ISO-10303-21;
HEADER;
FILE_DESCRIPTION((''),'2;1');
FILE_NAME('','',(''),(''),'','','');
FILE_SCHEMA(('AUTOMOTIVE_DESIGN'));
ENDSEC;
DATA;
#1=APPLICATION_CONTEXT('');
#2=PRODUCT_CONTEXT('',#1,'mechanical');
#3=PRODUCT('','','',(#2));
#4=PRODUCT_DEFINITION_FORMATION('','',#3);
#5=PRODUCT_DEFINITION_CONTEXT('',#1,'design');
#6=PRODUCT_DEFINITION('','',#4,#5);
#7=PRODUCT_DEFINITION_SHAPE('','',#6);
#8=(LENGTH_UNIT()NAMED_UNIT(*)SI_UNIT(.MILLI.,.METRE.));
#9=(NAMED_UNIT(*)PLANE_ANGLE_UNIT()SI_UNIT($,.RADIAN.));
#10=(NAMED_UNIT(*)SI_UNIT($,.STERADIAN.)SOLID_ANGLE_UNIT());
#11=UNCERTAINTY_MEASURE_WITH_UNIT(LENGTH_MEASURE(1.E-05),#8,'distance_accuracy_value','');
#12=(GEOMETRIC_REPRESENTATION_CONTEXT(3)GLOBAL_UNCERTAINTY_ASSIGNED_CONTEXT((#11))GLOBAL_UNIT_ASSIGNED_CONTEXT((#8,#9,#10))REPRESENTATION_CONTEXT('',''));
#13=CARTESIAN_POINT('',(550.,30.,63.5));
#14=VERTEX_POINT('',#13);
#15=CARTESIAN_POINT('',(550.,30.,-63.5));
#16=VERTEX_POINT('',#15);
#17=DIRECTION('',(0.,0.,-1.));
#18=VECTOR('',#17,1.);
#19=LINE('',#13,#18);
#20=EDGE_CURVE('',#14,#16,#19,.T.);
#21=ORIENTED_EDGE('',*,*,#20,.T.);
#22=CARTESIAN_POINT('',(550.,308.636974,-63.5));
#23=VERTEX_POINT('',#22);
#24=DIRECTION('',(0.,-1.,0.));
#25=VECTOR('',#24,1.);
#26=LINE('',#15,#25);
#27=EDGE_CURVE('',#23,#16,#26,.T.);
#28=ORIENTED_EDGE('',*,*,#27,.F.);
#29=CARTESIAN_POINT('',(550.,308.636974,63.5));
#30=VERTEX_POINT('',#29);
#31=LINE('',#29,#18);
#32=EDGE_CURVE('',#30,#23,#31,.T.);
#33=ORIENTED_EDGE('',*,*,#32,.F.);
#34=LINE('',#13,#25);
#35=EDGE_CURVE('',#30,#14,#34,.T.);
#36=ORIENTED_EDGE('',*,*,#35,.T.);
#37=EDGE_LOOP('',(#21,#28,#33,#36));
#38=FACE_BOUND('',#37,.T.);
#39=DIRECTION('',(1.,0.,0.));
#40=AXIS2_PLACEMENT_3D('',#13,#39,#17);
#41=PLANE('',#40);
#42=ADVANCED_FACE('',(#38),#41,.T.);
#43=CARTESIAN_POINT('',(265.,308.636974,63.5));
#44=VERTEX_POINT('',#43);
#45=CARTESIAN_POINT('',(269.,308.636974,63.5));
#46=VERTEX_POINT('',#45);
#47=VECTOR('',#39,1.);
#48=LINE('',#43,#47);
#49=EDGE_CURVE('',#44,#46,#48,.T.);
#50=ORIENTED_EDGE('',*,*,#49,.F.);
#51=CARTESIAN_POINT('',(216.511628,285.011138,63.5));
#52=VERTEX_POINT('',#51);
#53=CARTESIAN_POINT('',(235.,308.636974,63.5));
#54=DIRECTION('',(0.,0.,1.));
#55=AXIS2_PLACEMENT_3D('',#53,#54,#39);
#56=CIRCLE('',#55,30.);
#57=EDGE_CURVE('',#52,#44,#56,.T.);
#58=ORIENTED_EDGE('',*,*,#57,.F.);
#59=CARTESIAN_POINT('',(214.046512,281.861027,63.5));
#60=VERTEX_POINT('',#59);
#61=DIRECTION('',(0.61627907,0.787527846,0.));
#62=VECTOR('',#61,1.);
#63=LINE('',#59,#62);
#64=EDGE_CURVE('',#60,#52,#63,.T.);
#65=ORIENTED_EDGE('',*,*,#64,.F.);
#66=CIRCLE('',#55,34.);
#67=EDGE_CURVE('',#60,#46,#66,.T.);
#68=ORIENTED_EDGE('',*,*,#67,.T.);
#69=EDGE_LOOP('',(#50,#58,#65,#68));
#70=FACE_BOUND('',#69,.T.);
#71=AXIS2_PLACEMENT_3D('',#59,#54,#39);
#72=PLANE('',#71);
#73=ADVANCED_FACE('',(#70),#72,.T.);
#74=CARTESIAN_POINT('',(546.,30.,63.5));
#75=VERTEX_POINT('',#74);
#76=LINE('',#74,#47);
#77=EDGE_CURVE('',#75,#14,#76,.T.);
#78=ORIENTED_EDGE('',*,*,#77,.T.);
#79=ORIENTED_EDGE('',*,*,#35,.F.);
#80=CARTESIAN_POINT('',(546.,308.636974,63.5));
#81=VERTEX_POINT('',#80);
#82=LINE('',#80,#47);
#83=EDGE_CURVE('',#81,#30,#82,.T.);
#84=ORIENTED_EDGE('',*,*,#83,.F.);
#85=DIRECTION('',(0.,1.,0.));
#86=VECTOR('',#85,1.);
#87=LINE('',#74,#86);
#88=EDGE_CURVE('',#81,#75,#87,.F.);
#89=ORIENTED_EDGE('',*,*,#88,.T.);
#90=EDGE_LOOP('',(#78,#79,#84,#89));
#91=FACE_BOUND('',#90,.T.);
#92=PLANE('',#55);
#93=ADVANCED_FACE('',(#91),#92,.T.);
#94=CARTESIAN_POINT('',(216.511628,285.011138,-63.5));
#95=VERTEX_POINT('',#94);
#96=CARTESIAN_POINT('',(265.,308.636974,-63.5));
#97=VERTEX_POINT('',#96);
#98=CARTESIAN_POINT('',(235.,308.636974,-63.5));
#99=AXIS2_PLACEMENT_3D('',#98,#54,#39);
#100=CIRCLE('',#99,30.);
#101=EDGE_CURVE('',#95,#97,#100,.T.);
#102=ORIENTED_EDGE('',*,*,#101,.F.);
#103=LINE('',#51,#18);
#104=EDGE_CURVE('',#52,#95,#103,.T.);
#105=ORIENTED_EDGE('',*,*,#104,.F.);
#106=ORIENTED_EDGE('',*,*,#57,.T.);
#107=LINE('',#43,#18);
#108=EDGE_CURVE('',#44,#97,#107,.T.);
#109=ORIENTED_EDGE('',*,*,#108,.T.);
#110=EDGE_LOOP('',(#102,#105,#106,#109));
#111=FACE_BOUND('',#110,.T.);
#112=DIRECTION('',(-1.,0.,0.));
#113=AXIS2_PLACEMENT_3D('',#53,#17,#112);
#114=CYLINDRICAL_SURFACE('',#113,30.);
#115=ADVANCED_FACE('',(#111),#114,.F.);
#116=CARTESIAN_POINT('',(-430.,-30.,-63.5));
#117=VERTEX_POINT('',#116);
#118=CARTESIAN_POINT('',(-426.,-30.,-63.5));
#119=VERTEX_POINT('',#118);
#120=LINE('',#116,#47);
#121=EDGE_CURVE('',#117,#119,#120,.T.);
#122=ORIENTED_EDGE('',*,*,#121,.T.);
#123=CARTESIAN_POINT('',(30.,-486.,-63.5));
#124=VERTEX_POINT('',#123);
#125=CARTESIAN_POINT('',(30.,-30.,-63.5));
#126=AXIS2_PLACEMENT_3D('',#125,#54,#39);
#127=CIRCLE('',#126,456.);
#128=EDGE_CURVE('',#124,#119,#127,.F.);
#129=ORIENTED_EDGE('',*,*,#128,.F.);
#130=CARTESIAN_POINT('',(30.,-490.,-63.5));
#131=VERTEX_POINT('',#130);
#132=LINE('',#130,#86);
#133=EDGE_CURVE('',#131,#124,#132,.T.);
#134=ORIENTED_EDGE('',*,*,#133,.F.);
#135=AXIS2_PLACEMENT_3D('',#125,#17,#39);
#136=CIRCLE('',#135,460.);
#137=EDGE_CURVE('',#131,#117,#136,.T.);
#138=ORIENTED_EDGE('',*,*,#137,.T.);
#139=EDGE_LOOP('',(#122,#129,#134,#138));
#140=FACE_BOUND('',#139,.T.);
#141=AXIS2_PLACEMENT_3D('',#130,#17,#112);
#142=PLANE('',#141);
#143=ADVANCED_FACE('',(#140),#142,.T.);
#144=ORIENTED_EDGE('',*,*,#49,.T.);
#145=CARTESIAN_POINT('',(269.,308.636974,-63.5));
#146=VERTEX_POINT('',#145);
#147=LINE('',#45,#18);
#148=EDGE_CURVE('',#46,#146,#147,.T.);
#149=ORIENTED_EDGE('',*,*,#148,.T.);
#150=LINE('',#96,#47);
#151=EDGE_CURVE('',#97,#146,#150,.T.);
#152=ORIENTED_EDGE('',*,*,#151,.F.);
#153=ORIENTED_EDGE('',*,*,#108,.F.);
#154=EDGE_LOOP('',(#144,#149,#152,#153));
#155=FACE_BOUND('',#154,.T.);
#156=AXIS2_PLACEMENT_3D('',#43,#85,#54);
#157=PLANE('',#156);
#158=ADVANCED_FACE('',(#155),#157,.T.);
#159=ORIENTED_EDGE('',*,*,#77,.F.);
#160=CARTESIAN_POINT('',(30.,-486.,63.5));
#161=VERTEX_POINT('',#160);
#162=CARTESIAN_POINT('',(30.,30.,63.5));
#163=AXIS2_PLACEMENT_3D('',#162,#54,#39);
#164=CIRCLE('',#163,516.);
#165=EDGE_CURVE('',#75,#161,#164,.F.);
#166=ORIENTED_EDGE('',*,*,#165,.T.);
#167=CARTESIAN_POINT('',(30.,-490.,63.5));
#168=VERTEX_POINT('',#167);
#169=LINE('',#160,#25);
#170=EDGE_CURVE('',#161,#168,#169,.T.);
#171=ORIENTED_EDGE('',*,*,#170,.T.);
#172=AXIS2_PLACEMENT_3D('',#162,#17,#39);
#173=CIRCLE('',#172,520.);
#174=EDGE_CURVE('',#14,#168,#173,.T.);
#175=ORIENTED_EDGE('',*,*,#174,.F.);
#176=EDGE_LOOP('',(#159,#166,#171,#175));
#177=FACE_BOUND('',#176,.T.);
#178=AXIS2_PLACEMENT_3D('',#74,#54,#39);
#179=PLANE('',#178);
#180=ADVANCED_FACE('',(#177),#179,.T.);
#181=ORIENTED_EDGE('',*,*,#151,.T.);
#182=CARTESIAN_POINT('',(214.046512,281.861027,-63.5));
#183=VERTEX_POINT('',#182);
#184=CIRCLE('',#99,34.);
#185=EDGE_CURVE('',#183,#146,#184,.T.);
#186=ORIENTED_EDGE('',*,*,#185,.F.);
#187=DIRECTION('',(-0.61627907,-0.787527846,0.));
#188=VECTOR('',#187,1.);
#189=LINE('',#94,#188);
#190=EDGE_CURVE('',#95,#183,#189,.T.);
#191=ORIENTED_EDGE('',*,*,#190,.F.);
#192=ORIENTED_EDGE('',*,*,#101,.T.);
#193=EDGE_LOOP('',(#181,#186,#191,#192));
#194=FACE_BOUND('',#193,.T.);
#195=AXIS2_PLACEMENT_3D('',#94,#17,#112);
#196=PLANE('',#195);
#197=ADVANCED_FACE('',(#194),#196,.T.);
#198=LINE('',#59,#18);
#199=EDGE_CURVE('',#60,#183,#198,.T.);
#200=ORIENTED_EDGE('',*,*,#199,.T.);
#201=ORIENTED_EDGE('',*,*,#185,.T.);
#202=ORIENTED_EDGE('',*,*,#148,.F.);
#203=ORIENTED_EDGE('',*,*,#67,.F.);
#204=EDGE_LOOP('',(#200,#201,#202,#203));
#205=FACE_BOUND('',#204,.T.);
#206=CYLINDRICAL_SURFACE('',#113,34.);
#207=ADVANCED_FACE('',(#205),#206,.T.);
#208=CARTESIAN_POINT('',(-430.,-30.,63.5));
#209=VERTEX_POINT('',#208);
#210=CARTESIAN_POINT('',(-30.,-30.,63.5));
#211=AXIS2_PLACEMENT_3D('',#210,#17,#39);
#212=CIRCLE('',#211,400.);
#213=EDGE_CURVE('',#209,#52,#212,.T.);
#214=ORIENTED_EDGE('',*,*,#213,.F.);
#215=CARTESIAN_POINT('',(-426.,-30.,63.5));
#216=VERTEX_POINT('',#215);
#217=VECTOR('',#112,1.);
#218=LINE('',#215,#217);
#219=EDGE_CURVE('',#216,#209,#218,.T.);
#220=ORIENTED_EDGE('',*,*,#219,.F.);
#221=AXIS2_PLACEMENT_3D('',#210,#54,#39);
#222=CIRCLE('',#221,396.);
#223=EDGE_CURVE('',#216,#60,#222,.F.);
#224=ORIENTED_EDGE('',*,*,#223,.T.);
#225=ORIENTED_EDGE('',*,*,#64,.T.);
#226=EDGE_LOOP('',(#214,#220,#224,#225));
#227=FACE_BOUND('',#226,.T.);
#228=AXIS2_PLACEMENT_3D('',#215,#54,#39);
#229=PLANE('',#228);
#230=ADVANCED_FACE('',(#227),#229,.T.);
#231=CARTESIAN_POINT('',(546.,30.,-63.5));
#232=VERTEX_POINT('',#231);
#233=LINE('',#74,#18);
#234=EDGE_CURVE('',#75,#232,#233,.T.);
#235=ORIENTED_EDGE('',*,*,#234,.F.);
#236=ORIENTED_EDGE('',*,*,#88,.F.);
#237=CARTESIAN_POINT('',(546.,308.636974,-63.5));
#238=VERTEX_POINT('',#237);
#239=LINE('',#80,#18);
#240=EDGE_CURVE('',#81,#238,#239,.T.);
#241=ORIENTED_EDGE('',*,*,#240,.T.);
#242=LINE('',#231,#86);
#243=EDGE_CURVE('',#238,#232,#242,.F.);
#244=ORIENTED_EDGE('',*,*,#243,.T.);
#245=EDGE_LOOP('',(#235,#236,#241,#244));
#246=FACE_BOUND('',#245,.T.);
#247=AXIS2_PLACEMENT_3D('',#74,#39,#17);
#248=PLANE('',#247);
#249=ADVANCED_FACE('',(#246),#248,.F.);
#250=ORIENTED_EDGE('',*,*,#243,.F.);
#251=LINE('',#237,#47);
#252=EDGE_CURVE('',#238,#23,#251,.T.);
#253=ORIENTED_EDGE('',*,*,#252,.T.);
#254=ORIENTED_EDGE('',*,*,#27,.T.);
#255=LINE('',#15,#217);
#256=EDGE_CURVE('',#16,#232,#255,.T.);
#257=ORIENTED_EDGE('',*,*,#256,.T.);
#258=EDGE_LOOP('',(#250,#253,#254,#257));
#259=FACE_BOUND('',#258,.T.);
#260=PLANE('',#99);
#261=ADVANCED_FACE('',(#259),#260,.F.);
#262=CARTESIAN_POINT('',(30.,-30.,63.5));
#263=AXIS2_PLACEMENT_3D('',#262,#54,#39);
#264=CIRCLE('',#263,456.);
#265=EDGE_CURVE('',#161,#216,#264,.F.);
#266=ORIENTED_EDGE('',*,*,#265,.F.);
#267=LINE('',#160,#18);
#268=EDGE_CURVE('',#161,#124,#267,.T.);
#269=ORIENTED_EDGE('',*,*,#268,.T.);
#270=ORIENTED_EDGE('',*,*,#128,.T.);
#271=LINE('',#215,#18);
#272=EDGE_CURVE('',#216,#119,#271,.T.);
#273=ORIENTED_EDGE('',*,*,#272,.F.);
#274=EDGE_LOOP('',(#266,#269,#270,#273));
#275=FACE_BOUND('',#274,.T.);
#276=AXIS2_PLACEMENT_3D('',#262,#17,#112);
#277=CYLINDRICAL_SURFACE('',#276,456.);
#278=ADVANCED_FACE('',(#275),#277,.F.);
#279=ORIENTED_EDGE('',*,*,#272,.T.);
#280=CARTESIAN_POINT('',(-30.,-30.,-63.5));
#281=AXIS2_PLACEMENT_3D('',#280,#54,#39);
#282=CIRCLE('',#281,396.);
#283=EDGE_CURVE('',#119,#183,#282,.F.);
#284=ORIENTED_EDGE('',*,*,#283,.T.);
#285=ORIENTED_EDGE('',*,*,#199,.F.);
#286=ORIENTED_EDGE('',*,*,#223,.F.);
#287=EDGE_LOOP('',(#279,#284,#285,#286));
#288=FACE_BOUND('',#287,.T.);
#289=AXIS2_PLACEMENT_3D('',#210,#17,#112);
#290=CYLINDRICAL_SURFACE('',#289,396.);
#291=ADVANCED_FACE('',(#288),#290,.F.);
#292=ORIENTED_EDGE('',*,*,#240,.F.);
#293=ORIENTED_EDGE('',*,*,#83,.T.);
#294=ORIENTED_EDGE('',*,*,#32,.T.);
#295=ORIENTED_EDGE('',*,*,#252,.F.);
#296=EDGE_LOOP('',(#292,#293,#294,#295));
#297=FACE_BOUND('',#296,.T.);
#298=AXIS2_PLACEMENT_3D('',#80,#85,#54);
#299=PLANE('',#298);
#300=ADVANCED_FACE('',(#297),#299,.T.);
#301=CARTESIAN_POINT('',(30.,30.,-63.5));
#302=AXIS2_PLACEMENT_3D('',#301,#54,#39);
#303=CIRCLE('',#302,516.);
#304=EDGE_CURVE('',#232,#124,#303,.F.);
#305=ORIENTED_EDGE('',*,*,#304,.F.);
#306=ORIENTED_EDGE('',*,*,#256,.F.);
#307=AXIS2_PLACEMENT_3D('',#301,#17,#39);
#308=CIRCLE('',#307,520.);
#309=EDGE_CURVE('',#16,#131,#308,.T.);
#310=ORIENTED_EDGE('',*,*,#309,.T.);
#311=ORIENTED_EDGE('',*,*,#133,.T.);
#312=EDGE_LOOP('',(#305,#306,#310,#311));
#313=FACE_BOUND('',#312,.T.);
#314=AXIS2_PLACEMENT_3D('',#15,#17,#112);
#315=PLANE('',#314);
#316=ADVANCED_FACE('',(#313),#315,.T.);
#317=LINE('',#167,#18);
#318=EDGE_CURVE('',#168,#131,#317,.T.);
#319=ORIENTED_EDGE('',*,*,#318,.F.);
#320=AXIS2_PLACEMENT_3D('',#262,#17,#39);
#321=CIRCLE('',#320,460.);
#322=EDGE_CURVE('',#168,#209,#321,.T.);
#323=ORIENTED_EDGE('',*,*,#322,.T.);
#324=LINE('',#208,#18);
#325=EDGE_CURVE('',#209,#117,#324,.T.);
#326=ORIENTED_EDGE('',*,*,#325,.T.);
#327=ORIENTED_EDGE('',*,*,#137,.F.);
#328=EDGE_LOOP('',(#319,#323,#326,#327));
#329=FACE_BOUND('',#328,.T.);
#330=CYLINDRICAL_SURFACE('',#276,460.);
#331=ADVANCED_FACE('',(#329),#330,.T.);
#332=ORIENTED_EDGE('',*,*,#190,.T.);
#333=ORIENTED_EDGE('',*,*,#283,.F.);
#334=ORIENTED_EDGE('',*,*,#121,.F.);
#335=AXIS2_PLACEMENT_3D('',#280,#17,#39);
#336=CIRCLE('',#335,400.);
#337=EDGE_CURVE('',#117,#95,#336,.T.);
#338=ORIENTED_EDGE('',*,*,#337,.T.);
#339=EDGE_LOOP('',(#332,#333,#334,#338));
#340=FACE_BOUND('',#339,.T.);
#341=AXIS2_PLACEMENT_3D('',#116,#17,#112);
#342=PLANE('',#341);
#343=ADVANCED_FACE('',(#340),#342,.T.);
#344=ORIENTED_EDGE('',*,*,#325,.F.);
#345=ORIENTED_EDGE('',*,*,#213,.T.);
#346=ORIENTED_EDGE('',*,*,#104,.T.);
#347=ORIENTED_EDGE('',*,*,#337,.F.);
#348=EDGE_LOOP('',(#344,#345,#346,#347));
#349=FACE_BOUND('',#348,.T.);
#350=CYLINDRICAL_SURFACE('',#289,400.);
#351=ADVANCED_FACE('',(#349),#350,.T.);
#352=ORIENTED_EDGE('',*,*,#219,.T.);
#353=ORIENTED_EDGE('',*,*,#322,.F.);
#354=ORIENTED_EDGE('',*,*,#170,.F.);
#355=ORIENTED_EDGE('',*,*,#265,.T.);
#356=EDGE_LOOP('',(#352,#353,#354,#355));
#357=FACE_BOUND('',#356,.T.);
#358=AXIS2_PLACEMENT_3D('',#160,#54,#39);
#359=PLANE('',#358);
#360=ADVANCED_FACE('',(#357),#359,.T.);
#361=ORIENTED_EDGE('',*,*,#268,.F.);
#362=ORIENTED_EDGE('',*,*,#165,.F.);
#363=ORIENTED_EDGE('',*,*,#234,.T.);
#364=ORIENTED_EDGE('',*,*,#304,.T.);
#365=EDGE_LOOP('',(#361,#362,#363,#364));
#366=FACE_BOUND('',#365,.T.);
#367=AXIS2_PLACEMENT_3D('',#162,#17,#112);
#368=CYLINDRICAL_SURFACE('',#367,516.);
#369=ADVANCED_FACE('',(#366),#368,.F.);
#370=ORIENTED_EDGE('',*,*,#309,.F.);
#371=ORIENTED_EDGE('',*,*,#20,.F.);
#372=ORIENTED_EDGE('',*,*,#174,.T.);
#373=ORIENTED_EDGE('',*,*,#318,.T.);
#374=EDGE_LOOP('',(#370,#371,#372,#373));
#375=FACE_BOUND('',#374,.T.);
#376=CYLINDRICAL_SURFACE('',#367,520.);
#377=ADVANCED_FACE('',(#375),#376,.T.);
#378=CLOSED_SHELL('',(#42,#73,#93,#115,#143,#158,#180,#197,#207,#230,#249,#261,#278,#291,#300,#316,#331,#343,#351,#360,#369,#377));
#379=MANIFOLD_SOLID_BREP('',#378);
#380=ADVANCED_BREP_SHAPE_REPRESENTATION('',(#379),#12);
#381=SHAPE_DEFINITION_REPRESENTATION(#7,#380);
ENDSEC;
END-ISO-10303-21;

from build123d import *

# Parameters (mm, degrees)
BASE_FLANGE1_DEPTH = 63.5


# Sheet-metal steps are written as plain solids
with BuildPart() as part:
    # Sketch1 → Base-Flange1 (new, symmetric)
    with BuildSketch(Plane.XY):
        with BuildLine():
            ThreePointArc((265, 308.636973764), (248.140563862, 281.667999342), (216.511627907, 285.011138385))
            ThreePointArc((216.511627907, 285.011138385), (-205.207518157, 329.586325632), (-430, -30))
            ThreePointArc((-430, -30), (-295.269119346, -355.269119346), (30, -490))
            ThreePointArc((30, -490), (397.695526217, -337.695526217), (550, 30))
            Line((550, 30), (550, 308.636973764))
            Line((550, 308.636973764), (546, 308.636973764))
            Line((546, 308.636973764), (546, 30))
            ThreePointArc((546, 30), (394.867099092, -334.867099092), (30, -486))
            ThreePointArc((30, -486), (-292.440692221, -352.440692221), (-426, -30))
            ThreePointArc((-426, -30), (-203.455442975, 325.990462376), (214.046511628, 281.861027001))
            ThreePointArc((214.046511628, 281.861027001), (249.892639043, 278.072136085), (269, 308.636973764))
            Line((269, 308.636973764), (265, 308.636973764))
        make_face()
    extrude(amount=BASE_FLANGE1_DEPTH, both=True)


solid = part.part
